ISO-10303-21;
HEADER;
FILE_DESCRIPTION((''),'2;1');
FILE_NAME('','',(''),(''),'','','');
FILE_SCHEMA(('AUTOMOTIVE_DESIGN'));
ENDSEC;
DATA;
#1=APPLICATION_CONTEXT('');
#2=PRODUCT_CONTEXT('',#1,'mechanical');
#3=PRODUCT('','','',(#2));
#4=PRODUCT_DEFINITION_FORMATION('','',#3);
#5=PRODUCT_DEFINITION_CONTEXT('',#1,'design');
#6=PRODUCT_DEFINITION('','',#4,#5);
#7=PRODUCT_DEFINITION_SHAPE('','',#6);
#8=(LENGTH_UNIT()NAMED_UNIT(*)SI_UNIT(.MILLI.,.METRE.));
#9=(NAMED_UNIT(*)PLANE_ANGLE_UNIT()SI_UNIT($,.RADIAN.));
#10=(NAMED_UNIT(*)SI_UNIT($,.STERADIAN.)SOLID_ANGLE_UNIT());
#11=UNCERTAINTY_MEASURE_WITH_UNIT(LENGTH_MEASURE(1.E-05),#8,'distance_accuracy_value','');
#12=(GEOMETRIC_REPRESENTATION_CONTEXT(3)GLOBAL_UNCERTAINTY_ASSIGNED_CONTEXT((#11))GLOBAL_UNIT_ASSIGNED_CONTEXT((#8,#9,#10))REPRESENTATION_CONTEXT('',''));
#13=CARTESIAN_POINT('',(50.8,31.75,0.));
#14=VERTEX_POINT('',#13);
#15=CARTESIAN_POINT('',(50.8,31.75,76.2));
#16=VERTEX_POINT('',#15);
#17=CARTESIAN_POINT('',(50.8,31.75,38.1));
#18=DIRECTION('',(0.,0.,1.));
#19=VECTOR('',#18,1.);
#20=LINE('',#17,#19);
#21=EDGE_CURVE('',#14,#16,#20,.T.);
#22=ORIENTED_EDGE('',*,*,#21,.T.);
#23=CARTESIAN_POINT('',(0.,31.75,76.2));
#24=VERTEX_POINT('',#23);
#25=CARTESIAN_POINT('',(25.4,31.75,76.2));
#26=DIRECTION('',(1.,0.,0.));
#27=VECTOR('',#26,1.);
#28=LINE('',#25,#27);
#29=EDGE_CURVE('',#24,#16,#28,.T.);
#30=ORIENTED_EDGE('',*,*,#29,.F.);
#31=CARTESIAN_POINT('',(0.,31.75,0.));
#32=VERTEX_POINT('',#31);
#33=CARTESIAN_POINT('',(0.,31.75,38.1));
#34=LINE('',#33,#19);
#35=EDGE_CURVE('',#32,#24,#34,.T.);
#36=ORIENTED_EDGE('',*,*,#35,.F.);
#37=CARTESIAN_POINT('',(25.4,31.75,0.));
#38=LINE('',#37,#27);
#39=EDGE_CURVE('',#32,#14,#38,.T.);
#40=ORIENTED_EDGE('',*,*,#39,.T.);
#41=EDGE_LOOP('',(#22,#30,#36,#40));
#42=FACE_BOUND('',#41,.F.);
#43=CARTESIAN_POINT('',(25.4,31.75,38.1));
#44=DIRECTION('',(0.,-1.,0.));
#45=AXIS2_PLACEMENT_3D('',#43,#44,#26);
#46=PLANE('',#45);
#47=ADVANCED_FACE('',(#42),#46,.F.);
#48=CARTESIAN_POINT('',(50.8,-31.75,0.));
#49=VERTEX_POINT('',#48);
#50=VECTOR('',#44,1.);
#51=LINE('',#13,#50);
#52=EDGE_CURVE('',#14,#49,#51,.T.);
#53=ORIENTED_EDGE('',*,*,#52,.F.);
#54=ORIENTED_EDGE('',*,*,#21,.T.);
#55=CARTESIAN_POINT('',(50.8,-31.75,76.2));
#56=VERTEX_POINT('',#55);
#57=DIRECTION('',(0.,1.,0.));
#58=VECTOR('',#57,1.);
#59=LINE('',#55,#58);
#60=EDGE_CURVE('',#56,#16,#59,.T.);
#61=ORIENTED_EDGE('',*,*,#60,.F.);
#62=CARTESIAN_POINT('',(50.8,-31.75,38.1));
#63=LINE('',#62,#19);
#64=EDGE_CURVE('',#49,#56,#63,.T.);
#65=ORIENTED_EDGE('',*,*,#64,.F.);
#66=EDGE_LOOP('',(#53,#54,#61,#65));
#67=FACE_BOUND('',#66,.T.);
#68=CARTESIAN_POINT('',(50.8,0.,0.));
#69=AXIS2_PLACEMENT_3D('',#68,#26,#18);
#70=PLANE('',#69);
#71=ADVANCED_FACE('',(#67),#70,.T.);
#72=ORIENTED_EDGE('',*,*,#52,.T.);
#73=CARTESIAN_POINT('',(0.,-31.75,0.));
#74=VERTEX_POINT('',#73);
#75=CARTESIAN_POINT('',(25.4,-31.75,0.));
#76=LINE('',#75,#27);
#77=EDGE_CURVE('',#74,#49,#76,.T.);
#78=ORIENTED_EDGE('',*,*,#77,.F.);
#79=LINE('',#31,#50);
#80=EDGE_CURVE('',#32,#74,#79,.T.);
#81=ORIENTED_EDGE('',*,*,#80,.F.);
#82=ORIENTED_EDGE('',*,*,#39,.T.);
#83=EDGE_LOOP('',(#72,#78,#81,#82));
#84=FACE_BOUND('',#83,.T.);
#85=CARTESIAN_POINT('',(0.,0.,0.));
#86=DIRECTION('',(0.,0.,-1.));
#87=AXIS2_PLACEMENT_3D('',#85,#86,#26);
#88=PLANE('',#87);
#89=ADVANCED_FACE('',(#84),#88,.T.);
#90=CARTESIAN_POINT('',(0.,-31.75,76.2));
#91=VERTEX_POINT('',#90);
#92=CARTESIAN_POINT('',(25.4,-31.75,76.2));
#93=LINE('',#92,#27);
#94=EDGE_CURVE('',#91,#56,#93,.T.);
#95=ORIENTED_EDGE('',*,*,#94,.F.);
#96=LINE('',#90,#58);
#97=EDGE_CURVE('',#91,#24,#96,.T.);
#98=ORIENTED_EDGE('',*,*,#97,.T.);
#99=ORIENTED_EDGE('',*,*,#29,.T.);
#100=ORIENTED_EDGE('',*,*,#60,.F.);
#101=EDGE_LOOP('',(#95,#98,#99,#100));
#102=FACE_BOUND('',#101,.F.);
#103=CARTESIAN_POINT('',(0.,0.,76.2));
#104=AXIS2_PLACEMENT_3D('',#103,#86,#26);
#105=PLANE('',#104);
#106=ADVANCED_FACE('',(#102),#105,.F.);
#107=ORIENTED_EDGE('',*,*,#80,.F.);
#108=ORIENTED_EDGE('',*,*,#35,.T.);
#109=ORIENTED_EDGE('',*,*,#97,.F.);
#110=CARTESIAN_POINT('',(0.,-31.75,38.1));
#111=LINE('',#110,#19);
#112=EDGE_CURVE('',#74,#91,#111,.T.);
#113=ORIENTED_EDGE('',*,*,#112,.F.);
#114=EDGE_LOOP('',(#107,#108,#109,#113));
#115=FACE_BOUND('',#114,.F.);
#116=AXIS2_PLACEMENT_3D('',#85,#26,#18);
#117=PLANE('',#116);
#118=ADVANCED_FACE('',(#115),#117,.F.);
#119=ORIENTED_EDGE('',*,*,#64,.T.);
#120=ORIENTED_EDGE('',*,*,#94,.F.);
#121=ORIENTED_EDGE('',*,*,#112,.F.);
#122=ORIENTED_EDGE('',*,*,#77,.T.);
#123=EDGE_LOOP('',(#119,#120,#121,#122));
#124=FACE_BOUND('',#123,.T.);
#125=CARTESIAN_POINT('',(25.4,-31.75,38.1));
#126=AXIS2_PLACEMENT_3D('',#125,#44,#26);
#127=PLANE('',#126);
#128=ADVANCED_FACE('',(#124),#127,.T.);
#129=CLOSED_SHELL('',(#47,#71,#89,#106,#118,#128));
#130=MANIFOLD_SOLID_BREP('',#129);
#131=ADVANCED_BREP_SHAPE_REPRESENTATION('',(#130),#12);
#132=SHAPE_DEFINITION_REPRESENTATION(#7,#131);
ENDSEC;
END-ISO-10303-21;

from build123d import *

# Parameters (mm, degrees)
F0_W     = 50.8
F0_H     = 76.2
F1_DEPTH = 31.75


# Not quite as in the source:
# - the program builds the solid bodies; features that only make, move or delete a surface that nothing else refers to are left out


with BuildPart() as f1:
    # F0 (on Front) → F1 (new body, symmetric)
    with BuildSketch(Plane.XZ):
        with Locations((25.4, 38.1)):
            Rectangle(F0_W, F0_H)
    extrude(amount=F1_DEPTH, both=True)


solid = f1.part
